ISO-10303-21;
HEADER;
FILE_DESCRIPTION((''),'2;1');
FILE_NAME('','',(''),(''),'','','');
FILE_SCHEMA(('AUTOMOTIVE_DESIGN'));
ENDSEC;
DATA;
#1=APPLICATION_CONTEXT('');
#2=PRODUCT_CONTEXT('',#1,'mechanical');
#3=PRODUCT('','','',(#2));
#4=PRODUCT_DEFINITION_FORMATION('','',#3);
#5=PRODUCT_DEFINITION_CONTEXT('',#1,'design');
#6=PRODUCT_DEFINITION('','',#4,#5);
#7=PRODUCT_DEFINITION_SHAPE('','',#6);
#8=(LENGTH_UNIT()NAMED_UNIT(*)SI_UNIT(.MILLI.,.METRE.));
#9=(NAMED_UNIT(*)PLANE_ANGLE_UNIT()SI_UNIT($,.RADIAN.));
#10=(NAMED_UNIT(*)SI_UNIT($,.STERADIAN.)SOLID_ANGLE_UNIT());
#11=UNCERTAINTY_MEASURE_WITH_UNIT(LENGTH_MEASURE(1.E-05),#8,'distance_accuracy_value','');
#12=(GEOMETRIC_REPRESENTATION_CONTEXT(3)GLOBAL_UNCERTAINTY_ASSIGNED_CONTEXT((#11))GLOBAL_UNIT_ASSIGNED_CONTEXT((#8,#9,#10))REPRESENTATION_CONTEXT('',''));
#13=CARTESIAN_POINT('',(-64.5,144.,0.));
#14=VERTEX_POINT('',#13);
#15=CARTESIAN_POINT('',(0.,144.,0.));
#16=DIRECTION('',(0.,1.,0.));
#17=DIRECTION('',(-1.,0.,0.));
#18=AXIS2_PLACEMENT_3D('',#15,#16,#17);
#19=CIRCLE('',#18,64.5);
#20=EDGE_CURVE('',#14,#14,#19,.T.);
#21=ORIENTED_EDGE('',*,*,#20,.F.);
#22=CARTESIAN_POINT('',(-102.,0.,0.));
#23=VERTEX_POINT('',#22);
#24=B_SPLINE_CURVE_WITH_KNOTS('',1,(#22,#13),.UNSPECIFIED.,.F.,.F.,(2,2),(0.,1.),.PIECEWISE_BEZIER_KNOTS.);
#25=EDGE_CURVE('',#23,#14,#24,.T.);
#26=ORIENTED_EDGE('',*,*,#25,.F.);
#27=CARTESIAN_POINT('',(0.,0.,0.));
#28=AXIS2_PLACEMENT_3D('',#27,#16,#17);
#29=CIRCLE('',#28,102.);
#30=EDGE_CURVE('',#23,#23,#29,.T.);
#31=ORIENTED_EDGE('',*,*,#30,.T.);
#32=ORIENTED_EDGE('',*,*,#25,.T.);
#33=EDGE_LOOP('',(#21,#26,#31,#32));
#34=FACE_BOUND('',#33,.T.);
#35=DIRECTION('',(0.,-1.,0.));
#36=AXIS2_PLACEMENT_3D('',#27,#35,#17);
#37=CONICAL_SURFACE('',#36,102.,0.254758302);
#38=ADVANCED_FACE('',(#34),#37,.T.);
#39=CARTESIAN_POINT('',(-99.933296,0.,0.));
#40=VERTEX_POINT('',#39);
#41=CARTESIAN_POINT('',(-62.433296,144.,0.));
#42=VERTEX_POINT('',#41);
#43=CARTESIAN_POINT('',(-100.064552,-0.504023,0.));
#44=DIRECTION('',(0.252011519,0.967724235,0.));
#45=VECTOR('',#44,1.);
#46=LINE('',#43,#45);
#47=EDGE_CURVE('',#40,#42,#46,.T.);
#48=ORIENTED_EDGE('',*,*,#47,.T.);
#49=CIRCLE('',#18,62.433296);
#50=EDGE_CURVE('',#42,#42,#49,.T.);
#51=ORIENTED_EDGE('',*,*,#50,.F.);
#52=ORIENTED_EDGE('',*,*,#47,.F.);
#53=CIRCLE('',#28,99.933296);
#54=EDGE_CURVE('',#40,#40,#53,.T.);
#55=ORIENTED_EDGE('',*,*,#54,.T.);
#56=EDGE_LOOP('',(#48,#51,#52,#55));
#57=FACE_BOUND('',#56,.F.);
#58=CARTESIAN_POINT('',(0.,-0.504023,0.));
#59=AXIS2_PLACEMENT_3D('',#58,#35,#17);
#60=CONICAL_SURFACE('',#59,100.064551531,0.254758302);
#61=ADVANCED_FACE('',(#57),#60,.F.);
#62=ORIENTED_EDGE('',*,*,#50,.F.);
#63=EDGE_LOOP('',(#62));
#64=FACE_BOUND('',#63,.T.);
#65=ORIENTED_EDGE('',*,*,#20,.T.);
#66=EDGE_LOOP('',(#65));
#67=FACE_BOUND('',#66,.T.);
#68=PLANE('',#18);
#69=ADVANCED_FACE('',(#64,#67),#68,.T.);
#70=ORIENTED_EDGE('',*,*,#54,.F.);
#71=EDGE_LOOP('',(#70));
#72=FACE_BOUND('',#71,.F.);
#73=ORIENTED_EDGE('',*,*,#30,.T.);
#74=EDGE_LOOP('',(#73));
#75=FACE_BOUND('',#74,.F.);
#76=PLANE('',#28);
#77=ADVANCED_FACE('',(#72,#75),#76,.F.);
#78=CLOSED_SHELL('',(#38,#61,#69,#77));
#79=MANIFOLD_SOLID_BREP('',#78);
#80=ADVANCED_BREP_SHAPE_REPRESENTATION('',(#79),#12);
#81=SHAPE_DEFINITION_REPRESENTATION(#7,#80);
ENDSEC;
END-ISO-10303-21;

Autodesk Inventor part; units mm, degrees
ref_plane "YZ Plane" through (0, 0, 0) normal (1, 0, 0) x (0, 1, 0)
ref_plane "XY Plane" through (0, 0, 0) normal (0, 0, 1) x (1, 0, 0)
sketch "Szkic6" plane through (0, 0, 0) normal (0, 1, 0) x (-1, 0, 0)
  circle A0 centre (0, 0) radius 102
  dimension "d33" = 204
ref_plane "Płaszczyzna konstrukcyjna1" through (0, 144, 0) normal (0, 1, 0) x (-1, 0, 0)
sketch "Szkic7" plane through (0, 144, 0) normal (0, 1, 0) x (-1, 0, 0)
  circle A0 centre (0, 0) radius 64.5
  dimension "d35" = 129
loft "Wyciągnięcie złożone1" add profiles "Szkic6", "Szkic7"
shell "Skorupa1" thickness 2 removed faces 2 at (8.6004, 144, -5.9504) at (-23.2432, 0, 54.3964)
equation "\"d33\" = OD1"
equation "\"d35\" = OD2"
equation "\"d52\" = THK"
equation "\"SzerokośćGięciaPodcięcia\" = Grubość"
equation "\"RozmiarPodcięciaNarożnika\" = 4 * Grubość"
equation "\"PromieńPrzejścia\" = PromieńGięcia"
equation "\"Rozmiar_promienia_Jacobiego\" = PromieńGięcia"
equation "\"Wielk_odstępu\" = Grubość"
equation "\"d2\" = PromieńGięcia"
equation "\"d23\" = PromieńGięcia"
equation "\"OD1\" = 204"
equation "\"OD2\" = 129"
equation "\"L\" = 144"
equation "\"THK\" = 2"
equation "\"d34\" = L"
equation "\"Grubość\" = 1.5"
equation "\"PromieńGięcia\" = 3"
properties part number "Redukcja symetryczna Ø204x129x2 L=144" material "304"
